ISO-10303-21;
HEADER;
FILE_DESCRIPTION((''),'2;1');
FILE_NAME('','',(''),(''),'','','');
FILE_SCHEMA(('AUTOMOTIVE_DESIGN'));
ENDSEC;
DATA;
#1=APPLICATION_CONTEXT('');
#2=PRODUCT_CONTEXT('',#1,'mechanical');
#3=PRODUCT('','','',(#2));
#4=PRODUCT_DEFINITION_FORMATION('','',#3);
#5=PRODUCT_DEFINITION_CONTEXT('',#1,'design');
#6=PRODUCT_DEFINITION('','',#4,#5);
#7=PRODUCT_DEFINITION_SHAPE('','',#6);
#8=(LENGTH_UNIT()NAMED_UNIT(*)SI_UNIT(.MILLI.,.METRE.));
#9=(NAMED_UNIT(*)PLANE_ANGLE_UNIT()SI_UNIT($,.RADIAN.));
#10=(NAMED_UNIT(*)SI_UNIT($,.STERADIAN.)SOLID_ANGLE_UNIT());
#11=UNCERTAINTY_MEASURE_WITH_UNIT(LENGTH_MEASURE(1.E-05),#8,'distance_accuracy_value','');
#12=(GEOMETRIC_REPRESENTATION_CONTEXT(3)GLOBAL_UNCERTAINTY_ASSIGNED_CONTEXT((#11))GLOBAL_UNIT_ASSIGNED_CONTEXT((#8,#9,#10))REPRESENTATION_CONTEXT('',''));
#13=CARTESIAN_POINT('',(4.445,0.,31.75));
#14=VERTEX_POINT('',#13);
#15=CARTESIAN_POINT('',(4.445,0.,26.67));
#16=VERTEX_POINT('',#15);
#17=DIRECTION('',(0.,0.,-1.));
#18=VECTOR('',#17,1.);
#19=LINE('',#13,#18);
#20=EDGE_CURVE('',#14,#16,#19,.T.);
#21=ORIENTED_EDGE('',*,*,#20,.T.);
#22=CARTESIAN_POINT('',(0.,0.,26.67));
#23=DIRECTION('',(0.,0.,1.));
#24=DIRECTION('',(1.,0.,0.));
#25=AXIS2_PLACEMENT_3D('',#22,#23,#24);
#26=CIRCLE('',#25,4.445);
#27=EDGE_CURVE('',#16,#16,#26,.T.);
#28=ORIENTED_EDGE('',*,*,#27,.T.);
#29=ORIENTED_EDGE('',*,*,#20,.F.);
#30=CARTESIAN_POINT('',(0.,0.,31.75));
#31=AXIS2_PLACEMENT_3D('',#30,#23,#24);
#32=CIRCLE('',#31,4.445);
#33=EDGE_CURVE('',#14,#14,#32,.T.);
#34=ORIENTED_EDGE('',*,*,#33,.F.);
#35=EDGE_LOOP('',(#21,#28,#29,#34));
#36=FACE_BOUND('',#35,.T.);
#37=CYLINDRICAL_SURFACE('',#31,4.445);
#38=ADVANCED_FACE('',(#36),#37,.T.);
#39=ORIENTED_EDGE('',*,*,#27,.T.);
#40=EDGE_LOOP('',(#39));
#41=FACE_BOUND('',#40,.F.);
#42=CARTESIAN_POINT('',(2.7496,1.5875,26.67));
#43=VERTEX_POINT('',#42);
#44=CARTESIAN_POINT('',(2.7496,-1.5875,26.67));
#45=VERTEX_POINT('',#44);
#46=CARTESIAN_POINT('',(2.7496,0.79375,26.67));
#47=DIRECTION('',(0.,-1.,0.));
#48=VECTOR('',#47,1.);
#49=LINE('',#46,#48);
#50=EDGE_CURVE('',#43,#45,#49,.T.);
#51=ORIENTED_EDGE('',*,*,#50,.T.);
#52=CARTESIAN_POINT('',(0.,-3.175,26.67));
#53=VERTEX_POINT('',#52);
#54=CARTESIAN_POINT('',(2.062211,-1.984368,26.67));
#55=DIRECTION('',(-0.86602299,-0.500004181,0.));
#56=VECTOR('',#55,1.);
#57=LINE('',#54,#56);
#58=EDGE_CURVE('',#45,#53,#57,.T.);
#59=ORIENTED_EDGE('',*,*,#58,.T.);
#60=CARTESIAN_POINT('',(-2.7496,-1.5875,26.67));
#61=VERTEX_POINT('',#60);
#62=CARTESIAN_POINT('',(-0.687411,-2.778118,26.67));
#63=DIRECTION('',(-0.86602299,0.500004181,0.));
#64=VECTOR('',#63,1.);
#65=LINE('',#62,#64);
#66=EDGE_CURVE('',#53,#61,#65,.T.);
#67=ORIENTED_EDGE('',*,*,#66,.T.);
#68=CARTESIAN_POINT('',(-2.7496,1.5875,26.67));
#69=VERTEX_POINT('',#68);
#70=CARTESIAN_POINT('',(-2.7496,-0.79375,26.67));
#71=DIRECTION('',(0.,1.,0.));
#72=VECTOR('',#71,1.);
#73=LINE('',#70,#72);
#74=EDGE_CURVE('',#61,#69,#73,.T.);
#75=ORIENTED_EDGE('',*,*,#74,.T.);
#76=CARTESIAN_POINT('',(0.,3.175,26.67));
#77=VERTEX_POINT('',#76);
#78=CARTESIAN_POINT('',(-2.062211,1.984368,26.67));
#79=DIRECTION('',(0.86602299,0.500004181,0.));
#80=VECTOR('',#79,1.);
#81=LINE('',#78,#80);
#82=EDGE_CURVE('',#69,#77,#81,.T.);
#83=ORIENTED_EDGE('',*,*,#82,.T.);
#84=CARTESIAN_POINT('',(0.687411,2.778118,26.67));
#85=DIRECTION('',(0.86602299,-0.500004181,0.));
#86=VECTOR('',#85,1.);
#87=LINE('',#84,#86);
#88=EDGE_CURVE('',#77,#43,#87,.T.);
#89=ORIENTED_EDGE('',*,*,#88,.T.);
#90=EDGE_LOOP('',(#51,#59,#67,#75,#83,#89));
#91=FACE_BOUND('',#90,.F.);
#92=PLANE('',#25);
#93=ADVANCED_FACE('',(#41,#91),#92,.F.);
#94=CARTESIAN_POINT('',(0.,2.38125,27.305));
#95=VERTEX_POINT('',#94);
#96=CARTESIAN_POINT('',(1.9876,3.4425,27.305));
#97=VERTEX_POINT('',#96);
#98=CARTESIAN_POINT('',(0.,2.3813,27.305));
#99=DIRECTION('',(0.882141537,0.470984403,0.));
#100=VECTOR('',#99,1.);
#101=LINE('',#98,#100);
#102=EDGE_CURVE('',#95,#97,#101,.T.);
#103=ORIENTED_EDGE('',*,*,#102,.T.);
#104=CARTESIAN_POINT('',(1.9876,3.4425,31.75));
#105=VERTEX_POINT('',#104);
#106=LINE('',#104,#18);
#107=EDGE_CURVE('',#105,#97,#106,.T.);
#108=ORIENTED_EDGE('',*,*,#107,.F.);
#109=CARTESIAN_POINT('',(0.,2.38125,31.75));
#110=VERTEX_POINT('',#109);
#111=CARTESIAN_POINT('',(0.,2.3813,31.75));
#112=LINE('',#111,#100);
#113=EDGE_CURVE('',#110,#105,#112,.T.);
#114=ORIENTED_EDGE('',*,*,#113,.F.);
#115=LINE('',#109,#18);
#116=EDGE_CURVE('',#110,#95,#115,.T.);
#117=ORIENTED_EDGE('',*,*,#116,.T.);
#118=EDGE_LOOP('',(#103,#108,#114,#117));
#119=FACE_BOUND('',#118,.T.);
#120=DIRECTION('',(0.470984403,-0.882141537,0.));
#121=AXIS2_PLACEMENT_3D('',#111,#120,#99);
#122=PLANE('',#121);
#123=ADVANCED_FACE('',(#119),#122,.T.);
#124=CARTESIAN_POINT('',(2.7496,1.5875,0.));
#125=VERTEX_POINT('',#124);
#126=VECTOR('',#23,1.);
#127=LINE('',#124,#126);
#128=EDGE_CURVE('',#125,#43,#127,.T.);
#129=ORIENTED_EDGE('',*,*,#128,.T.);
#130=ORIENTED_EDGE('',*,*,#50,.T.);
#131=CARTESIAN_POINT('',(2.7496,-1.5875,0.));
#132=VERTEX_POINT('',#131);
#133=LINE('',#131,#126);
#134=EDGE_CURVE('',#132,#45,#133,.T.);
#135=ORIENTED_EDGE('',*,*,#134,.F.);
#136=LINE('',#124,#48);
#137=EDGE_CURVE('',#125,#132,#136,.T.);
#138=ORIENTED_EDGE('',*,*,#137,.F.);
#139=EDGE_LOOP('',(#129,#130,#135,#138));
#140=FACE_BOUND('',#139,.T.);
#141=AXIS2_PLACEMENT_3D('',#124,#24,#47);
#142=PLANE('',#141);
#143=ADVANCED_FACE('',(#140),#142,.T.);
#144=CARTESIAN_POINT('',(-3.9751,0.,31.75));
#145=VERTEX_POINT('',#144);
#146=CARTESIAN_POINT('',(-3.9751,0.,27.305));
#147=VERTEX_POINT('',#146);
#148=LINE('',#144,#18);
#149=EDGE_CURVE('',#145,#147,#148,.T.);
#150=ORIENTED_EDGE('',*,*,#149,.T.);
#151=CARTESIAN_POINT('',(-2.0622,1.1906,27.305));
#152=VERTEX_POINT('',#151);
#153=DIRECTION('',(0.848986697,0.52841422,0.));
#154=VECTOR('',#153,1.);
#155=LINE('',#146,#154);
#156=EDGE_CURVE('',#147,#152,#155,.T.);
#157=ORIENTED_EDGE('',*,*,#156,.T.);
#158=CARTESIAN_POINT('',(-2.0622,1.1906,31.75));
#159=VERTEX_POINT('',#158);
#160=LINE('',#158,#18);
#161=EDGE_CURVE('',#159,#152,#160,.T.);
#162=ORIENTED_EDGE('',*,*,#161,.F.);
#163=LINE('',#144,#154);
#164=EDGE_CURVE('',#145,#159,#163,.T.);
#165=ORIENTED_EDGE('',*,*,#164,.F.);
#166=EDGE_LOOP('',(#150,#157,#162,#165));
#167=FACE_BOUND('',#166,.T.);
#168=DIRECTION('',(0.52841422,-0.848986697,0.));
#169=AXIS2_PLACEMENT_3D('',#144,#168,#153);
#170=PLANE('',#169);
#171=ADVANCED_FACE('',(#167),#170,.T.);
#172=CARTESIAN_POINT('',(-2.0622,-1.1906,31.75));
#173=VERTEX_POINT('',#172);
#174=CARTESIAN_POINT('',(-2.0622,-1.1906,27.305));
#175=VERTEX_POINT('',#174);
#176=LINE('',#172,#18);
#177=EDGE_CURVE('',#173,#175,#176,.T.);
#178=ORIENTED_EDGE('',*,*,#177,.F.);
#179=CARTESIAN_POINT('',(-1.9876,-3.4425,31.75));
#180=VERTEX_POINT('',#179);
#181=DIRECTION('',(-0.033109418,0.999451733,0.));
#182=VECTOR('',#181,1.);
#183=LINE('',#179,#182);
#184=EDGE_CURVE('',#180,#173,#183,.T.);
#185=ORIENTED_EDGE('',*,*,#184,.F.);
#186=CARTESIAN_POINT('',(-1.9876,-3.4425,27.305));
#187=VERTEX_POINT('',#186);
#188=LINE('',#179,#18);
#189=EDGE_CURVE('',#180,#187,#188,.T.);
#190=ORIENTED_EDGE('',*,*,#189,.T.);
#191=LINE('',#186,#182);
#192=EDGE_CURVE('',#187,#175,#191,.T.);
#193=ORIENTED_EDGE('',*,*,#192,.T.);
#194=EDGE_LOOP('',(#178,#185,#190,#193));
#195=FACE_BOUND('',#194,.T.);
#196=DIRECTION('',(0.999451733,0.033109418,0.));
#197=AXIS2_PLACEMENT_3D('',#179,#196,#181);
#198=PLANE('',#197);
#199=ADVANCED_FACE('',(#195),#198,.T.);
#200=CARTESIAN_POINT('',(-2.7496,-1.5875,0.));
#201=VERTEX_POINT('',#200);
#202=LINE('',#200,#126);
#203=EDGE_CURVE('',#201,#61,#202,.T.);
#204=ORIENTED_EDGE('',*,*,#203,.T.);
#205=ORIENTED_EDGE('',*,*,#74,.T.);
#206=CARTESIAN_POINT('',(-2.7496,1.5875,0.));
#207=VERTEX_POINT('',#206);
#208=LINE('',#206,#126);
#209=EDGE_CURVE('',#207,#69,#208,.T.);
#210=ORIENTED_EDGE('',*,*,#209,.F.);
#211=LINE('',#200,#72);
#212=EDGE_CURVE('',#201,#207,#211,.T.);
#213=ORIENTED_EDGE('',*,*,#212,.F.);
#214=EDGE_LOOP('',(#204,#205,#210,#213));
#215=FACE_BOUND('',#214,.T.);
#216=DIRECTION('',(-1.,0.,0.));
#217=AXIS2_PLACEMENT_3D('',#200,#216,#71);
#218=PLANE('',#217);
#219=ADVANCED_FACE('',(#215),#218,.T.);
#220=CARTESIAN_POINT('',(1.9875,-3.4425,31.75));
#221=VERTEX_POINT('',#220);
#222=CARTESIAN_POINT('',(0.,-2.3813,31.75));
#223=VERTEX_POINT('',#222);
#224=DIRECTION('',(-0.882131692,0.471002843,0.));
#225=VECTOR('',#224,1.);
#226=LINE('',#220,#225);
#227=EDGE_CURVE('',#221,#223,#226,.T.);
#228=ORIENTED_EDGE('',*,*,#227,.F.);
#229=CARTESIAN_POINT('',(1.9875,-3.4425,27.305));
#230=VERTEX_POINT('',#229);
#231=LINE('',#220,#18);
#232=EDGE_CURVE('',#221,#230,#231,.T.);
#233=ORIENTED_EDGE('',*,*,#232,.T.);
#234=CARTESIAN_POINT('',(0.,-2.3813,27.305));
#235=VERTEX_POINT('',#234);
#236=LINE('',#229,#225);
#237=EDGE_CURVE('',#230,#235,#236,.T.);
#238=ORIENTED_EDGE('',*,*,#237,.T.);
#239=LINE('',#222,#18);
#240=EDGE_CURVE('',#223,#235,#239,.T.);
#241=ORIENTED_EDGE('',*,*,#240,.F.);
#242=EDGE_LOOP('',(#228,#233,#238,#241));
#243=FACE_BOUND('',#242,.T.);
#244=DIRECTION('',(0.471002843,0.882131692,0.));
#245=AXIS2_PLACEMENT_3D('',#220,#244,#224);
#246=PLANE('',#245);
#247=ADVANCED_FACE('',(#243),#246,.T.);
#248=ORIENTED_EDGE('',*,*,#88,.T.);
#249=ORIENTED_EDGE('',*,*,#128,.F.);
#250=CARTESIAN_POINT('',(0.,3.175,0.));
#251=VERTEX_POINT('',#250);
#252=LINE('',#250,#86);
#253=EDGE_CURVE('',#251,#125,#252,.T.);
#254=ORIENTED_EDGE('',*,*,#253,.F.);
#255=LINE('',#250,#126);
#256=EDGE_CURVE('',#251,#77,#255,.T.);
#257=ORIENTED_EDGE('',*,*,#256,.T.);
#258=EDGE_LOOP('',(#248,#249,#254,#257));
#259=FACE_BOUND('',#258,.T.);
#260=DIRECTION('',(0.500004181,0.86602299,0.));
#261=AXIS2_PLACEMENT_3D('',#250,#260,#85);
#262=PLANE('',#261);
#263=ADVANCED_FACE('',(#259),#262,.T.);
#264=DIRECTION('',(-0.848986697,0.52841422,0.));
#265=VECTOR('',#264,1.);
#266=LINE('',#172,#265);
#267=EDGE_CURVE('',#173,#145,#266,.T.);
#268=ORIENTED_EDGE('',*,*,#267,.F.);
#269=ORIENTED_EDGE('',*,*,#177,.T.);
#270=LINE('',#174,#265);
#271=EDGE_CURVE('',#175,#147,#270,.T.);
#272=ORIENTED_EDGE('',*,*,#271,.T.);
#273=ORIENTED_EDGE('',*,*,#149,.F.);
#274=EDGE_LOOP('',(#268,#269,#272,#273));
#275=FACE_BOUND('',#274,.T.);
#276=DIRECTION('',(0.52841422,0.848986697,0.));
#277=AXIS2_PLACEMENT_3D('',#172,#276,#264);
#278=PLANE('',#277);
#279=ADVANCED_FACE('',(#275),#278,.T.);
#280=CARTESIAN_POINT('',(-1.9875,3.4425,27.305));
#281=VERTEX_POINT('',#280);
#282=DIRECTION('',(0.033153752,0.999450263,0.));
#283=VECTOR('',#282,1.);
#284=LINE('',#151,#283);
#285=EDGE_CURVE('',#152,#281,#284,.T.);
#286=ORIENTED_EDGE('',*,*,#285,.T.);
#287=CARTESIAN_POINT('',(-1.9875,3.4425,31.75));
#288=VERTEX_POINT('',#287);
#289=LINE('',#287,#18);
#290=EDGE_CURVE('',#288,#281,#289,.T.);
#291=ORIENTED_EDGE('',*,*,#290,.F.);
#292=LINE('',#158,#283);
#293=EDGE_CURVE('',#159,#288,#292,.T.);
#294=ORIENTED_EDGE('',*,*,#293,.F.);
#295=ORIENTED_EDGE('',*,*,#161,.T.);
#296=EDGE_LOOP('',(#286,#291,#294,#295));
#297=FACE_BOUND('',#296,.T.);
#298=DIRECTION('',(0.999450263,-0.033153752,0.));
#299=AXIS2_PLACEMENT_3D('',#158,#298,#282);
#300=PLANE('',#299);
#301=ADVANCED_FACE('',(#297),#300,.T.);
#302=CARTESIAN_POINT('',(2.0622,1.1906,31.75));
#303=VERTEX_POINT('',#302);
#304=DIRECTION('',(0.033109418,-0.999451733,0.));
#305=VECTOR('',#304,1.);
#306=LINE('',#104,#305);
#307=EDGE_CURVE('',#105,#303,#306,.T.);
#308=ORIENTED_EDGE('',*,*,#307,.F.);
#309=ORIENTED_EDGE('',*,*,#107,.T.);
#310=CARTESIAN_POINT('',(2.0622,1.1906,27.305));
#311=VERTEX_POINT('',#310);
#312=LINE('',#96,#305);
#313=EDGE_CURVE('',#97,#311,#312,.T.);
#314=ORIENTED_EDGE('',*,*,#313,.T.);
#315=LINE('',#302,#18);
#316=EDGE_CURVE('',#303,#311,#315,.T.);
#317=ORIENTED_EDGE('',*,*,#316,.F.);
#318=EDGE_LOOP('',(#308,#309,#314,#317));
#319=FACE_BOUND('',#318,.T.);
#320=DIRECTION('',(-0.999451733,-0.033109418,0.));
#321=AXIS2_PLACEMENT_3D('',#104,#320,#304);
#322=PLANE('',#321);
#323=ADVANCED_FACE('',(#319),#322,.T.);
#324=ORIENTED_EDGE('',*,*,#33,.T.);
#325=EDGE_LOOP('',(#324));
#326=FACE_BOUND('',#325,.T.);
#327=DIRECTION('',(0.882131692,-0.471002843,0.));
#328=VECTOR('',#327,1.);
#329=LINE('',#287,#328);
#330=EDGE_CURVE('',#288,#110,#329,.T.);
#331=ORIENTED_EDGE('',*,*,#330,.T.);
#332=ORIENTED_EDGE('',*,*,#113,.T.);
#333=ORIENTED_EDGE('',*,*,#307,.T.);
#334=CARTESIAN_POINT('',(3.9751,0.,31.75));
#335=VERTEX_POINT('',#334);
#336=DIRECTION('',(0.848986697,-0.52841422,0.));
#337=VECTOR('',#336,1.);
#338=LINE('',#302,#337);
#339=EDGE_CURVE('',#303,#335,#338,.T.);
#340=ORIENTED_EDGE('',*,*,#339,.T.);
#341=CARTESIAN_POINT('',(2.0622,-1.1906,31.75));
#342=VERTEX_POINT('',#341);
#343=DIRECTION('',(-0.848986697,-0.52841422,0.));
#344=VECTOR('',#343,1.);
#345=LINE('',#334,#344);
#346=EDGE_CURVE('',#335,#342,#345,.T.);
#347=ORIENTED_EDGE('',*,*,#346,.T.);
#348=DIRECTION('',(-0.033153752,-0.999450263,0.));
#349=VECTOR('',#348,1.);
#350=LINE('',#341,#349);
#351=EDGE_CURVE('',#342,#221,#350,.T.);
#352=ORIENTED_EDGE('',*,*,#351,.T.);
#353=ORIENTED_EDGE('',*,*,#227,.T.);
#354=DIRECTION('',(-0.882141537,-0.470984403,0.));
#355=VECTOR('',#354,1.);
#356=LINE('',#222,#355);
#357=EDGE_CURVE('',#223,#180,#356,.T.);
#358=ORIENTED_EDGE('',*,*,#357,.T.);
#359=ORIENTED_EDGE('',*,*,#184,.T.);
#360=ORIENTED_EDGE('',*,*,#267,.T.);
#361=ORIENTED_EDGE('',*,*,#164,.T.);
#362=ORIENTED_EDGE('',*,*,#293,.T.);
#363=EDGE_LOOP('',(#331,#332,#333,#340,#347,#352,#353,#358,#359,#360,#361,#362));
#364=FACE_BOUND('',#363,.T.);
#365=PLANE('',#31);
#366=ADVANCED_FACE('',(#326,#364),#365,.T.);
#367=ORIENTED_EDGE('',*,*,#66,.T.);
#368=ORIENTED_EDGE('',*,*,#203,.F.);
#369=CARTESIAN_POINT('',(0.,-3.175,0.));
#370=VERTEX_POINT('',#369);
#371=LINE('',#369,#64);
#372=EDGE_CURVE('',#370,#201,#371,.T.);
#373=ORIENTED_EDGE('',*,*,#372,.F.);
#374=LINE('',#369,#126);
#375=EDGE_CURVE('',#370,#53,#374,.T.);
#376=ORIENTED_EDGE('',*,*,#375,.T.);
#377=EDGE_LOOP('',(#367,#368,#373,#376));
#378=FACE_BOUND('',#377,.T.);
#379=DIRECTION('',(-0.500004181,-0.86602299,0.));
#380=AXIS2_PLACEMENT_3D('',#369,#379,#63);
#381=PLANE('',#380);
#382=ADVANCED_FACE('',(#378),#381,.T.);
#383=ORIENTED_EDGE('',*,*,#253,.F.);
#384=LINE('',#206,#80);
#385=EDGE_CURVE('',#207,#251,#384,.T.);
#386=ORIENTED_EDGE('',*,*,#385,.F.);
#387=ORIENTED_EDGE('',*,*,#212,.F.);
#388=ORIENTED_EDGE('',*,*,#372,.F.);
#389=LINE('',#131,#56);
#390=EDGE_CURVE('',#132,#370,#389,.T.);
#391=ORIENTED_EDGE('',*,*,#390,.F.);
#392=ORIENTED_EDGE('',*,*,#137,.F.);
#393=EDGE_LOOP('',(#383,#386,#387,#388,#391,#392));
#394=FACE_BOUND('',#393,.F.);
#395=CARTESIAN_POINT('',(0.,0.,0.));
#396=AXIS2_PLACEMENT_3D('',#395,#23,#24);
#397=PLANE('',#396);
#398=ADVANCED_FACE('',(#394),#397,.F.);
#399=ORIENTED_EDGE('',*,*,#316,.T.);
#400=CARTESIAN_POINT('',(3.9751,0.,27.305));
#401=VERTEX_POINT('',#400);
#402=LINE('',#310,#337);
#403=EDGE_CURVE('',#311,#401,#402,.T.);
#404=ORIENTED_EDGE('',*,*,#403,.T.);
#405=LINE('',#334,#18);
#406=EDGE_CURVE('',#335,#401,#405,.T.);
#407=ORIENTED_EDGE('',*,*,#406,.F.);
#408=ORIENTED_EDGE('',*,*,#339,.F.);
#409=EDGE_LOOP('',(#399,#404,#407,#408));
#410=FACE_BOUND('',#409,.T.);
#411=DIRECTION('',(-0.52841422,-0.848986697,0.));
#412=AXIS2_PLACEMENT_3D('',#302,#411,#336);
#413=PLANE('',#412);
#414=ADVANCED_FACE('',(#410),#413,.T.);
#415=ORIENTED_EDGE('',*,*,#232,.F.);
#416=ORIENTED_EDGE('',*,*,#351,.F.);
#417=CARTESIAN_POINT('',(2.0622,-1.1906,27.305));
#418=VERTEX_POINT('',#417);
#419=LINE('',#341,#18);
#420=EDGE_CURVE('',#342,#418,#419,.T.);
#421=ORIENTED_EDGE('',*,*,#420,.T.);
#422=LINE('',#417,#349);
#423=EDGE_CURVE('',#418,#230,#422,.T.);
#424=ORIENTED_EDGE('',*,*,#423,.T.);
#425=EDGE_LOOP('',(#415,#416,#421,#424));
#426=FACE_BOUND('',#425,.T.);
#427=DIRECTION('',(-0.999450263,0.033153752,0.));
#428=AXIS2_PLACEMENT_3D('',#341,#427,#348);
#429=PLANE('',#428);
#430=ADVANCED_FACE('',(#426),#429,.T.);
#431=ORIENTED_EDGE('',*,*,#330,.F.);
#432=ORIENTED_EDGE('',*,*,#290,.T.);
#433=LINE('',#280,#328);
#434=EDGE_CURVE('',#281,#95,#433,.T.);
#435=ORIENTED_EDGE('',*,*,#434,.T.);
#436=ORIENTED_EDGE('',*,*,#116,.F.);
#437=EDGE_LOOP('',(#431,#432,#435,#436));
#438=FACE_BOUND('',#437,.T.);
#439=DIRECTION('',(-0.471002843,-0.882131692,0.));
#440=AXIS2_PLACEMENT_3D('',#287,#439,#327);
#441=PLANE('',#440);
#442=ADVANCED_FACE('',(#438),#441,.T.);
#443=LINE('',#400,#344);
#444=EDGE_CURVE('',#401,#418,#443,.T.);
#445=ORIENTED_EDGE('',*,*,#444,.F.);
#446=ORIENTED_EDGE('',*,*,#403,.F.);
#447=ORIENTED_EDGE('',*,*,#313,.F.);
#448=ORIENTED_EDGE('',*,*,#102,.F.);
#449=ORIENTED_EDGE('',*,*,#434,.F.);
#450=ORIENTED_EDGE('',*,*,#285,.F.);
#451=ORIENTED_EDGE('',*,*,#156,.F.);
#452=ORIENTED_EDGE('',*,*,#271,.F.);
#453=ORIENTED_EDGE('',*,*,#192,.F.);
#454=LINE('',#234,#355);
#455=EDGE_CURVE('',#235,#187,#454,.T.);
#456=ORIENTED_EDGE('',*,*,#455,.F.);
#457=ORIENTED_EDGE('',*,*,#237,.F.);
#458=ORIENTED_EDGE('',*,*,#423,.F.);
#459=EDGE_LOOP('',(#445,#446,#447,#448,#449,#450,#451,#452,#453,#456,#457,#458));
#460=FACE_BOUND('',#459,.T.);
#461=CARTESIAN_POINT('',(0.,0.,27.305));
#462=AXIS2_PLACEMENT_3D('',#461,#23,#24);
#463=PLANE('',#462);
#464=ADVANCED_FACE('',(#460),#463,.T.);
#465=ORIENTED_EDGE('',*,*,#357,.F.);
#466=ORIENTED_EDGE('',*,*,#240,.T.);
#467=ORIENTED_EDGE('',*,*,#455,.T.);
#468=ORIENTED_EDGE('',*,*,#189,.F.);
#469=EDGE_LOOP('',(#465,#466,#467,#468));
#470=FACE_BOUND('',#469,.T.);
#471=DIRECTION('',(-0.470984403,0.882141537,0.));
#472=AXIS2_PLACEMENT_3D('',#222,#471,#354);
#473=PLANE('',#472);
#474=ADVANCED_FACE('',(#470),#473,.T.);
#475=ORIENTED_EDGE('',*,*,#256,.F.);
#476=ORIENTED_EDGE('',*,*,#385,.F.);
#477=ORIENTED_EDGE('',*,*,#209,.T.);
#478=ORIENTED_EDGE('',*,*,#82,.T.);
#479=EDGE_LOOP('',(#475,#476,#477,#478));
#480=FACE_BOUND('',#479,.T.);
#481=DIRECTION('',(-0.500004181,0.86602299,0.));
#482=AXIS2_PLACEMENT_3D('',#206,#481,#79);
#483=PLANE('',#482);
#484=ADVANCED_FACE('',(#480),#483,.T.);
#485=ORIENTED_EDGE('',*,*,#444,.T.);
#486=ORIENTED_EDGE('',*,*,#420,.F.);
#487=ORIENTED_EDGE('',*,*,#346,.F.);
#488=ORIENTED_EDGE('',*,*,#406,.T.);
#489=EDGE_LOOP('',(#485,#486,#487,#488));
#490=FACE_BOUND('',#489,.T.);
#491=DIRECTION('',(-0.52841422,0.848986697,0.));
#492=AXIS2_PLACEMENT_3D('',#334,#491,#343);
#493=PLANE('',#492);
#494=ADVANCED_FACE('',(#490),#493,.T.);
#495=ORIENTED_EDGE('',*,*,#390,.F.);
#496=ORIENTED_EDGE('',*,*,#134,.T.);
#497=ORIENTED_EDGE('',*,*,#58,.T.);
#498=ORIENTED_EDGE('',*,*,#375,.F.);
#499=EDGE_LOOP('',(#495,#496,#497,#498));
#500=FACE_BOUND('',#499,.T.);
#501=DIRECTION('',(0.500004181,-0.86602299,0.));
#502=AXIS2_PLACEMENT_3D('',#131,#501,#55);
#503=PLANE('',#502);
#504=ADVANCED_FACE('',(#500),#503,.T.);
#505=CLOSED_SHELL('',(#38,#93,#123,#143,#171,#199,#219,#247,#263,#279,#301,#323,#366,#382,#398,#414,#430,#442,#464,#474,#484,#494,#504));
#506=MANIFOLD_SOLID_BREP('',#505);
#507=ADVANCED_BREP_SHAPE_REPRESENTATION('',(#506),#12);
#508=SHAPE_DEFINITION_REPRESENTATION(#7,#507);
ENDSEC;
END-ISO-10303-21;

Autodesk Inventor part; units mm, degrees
ref_plane "YZ Plane" through (0, 0, 0) normal (1, 0, 0) x (0, 1, 0)
ref_plane "XZ Plane" through (0, 0, 0) normal (0, 1, 0) x (-1, 0, 0)
ref_plane "XY Plane" through (0, 0, 0) normal (0, 0, 1) x (1, 0, 0)
sketch "Sketch1" plane through (0, 0, 0) normal (0, 0, 1) x (1, 0, 0)
  line L0 (0, 3.175) -> (2.7496, 1.5875)
  line L1 (2.7496, 1.5875) -> (2.7496, -1.5875)
  line L2 (2.7496, -1.5875) -> (0, -3.175)
  line L3 (0, -3.175) -> (-2.7496, -1.5875)
  line L4 (-2.7496, -1.5875) -> (-2.7496, 1.5875)
  line L5 (-2.7496, 1.5875) -> (0, 3.175)
  point P0 (0, 0)
  point P1 (0, 0)
  dimension "d0" = 6.35
  dimension "d1" = 2.7496
extrude "Extrusion1" add sketch "Sketch1" along normal blind 31.75
sketch "Sketch2" plane through (0, 0, 31.75) normal (0, 0, 1) x (1, 0, 0)
  circle A0 centre (0, 0) radius 4.445
  dimension "d4" = 8.89
extrude "Extrusion2" add sketch "Sketch2" against normal blind 5.08
sketch "Sketch3" plane through (0, 0, 31.75) normal (0, 0, 1) x (1, 0, 0)
  circle A0 centre (0, 0) radius 3.9751 construction
  circle A1 centre (0, 0) radius 2.3813 construction
  line L0 (-5.2785, 0) -> (7.6367, 0) construction
  line L1 (2.0622, 1.1906) -> (3.9751, 0)
  line L2 (3.9751, 0) -> (2.0622, -1.1906)
  line L3 (2.0622, -1.1906) -> (2.0622, 1.1906)
  line L4 (0, 2.3813) -> (1.9876, 3.4425)
  line L5 (1.9876, 3.4425) -> (2.0622, 1.1906)
  line L6 (2.0622, 1.1906) -> (0, 2.3813)
  line L7 (-2.0622, 1.1906) -> (-1.9875, 3.4425)
  line L8 (-1.9875, 3.4425) -> (0, 2.3812)
  line L9 (0, 2.3812) -> (-2.0622, 1.1906)
  line L10 (-2.0622, -1.1906) -> (-3.9751, 0)
  line L11 (-3.9751, 0) -> (-2.0622, 1.1906)
  line L12 (-2.0622, 1.1906) -> (-2.0622, -1.1906)
  line L13 (0, -2.3813) -> (-1.9876, -3.4425)
  line L14 (-1.9876, -3.4425) -> (-2.0622, -1.1906)
  line L15 (-2.0622, -1.1906) -> (0, -2.3813)
  line L16 (2.0622, -1.1906) -> (1.9875, -3.4425)
  line L17 (1.9875, -3.4425) -> (0, -2.3813)
  line L18 (0, -2.3813) -> (2.0622, -1.1906)
  dimension "d7" = 7.9502
  dimension "d8" = 4.7625
  dimension "d9" = 2.0216
  dimension "d10" = 60
  dimension "d11" = 2.3813
  dimension "d14" = 360
extrude "Extrusion3" cut sketch "Sketch3" against normal blind 4.445 contours L1 L2 L3 | L6 L4 L5 | L16 L17 L18 | L9 L7 L8 | L13 L14 L15 | L12 L10 L11
sketch "Sketch4" plane through (0, 0, 31.75) normal (0, 0, 1) x (1, 0, 0)
  line L0 (2.0622, 1.1906) -> (0, 2.3812) projected
  line L1 (0, 2.3812) -> (-2.0622, 1.1906) projected
  line L2 (-2.0622, 1.1906) -> (-2.0622, -1.1906) projected
  line L3 (-2.0622, -1.1906) -> (0, -2.3813) projected
  line L4 (0, -2.3813) -> (2.0622, -1.1906) projected
  line L5 (2.0622, -1.1906) -> (2.0622, 1.1906) projected
  point P0 (0, 0)
extrude "Extrusion4" cut sketch "Sketch4" against normal blind 4.445
properties part number "000111"
